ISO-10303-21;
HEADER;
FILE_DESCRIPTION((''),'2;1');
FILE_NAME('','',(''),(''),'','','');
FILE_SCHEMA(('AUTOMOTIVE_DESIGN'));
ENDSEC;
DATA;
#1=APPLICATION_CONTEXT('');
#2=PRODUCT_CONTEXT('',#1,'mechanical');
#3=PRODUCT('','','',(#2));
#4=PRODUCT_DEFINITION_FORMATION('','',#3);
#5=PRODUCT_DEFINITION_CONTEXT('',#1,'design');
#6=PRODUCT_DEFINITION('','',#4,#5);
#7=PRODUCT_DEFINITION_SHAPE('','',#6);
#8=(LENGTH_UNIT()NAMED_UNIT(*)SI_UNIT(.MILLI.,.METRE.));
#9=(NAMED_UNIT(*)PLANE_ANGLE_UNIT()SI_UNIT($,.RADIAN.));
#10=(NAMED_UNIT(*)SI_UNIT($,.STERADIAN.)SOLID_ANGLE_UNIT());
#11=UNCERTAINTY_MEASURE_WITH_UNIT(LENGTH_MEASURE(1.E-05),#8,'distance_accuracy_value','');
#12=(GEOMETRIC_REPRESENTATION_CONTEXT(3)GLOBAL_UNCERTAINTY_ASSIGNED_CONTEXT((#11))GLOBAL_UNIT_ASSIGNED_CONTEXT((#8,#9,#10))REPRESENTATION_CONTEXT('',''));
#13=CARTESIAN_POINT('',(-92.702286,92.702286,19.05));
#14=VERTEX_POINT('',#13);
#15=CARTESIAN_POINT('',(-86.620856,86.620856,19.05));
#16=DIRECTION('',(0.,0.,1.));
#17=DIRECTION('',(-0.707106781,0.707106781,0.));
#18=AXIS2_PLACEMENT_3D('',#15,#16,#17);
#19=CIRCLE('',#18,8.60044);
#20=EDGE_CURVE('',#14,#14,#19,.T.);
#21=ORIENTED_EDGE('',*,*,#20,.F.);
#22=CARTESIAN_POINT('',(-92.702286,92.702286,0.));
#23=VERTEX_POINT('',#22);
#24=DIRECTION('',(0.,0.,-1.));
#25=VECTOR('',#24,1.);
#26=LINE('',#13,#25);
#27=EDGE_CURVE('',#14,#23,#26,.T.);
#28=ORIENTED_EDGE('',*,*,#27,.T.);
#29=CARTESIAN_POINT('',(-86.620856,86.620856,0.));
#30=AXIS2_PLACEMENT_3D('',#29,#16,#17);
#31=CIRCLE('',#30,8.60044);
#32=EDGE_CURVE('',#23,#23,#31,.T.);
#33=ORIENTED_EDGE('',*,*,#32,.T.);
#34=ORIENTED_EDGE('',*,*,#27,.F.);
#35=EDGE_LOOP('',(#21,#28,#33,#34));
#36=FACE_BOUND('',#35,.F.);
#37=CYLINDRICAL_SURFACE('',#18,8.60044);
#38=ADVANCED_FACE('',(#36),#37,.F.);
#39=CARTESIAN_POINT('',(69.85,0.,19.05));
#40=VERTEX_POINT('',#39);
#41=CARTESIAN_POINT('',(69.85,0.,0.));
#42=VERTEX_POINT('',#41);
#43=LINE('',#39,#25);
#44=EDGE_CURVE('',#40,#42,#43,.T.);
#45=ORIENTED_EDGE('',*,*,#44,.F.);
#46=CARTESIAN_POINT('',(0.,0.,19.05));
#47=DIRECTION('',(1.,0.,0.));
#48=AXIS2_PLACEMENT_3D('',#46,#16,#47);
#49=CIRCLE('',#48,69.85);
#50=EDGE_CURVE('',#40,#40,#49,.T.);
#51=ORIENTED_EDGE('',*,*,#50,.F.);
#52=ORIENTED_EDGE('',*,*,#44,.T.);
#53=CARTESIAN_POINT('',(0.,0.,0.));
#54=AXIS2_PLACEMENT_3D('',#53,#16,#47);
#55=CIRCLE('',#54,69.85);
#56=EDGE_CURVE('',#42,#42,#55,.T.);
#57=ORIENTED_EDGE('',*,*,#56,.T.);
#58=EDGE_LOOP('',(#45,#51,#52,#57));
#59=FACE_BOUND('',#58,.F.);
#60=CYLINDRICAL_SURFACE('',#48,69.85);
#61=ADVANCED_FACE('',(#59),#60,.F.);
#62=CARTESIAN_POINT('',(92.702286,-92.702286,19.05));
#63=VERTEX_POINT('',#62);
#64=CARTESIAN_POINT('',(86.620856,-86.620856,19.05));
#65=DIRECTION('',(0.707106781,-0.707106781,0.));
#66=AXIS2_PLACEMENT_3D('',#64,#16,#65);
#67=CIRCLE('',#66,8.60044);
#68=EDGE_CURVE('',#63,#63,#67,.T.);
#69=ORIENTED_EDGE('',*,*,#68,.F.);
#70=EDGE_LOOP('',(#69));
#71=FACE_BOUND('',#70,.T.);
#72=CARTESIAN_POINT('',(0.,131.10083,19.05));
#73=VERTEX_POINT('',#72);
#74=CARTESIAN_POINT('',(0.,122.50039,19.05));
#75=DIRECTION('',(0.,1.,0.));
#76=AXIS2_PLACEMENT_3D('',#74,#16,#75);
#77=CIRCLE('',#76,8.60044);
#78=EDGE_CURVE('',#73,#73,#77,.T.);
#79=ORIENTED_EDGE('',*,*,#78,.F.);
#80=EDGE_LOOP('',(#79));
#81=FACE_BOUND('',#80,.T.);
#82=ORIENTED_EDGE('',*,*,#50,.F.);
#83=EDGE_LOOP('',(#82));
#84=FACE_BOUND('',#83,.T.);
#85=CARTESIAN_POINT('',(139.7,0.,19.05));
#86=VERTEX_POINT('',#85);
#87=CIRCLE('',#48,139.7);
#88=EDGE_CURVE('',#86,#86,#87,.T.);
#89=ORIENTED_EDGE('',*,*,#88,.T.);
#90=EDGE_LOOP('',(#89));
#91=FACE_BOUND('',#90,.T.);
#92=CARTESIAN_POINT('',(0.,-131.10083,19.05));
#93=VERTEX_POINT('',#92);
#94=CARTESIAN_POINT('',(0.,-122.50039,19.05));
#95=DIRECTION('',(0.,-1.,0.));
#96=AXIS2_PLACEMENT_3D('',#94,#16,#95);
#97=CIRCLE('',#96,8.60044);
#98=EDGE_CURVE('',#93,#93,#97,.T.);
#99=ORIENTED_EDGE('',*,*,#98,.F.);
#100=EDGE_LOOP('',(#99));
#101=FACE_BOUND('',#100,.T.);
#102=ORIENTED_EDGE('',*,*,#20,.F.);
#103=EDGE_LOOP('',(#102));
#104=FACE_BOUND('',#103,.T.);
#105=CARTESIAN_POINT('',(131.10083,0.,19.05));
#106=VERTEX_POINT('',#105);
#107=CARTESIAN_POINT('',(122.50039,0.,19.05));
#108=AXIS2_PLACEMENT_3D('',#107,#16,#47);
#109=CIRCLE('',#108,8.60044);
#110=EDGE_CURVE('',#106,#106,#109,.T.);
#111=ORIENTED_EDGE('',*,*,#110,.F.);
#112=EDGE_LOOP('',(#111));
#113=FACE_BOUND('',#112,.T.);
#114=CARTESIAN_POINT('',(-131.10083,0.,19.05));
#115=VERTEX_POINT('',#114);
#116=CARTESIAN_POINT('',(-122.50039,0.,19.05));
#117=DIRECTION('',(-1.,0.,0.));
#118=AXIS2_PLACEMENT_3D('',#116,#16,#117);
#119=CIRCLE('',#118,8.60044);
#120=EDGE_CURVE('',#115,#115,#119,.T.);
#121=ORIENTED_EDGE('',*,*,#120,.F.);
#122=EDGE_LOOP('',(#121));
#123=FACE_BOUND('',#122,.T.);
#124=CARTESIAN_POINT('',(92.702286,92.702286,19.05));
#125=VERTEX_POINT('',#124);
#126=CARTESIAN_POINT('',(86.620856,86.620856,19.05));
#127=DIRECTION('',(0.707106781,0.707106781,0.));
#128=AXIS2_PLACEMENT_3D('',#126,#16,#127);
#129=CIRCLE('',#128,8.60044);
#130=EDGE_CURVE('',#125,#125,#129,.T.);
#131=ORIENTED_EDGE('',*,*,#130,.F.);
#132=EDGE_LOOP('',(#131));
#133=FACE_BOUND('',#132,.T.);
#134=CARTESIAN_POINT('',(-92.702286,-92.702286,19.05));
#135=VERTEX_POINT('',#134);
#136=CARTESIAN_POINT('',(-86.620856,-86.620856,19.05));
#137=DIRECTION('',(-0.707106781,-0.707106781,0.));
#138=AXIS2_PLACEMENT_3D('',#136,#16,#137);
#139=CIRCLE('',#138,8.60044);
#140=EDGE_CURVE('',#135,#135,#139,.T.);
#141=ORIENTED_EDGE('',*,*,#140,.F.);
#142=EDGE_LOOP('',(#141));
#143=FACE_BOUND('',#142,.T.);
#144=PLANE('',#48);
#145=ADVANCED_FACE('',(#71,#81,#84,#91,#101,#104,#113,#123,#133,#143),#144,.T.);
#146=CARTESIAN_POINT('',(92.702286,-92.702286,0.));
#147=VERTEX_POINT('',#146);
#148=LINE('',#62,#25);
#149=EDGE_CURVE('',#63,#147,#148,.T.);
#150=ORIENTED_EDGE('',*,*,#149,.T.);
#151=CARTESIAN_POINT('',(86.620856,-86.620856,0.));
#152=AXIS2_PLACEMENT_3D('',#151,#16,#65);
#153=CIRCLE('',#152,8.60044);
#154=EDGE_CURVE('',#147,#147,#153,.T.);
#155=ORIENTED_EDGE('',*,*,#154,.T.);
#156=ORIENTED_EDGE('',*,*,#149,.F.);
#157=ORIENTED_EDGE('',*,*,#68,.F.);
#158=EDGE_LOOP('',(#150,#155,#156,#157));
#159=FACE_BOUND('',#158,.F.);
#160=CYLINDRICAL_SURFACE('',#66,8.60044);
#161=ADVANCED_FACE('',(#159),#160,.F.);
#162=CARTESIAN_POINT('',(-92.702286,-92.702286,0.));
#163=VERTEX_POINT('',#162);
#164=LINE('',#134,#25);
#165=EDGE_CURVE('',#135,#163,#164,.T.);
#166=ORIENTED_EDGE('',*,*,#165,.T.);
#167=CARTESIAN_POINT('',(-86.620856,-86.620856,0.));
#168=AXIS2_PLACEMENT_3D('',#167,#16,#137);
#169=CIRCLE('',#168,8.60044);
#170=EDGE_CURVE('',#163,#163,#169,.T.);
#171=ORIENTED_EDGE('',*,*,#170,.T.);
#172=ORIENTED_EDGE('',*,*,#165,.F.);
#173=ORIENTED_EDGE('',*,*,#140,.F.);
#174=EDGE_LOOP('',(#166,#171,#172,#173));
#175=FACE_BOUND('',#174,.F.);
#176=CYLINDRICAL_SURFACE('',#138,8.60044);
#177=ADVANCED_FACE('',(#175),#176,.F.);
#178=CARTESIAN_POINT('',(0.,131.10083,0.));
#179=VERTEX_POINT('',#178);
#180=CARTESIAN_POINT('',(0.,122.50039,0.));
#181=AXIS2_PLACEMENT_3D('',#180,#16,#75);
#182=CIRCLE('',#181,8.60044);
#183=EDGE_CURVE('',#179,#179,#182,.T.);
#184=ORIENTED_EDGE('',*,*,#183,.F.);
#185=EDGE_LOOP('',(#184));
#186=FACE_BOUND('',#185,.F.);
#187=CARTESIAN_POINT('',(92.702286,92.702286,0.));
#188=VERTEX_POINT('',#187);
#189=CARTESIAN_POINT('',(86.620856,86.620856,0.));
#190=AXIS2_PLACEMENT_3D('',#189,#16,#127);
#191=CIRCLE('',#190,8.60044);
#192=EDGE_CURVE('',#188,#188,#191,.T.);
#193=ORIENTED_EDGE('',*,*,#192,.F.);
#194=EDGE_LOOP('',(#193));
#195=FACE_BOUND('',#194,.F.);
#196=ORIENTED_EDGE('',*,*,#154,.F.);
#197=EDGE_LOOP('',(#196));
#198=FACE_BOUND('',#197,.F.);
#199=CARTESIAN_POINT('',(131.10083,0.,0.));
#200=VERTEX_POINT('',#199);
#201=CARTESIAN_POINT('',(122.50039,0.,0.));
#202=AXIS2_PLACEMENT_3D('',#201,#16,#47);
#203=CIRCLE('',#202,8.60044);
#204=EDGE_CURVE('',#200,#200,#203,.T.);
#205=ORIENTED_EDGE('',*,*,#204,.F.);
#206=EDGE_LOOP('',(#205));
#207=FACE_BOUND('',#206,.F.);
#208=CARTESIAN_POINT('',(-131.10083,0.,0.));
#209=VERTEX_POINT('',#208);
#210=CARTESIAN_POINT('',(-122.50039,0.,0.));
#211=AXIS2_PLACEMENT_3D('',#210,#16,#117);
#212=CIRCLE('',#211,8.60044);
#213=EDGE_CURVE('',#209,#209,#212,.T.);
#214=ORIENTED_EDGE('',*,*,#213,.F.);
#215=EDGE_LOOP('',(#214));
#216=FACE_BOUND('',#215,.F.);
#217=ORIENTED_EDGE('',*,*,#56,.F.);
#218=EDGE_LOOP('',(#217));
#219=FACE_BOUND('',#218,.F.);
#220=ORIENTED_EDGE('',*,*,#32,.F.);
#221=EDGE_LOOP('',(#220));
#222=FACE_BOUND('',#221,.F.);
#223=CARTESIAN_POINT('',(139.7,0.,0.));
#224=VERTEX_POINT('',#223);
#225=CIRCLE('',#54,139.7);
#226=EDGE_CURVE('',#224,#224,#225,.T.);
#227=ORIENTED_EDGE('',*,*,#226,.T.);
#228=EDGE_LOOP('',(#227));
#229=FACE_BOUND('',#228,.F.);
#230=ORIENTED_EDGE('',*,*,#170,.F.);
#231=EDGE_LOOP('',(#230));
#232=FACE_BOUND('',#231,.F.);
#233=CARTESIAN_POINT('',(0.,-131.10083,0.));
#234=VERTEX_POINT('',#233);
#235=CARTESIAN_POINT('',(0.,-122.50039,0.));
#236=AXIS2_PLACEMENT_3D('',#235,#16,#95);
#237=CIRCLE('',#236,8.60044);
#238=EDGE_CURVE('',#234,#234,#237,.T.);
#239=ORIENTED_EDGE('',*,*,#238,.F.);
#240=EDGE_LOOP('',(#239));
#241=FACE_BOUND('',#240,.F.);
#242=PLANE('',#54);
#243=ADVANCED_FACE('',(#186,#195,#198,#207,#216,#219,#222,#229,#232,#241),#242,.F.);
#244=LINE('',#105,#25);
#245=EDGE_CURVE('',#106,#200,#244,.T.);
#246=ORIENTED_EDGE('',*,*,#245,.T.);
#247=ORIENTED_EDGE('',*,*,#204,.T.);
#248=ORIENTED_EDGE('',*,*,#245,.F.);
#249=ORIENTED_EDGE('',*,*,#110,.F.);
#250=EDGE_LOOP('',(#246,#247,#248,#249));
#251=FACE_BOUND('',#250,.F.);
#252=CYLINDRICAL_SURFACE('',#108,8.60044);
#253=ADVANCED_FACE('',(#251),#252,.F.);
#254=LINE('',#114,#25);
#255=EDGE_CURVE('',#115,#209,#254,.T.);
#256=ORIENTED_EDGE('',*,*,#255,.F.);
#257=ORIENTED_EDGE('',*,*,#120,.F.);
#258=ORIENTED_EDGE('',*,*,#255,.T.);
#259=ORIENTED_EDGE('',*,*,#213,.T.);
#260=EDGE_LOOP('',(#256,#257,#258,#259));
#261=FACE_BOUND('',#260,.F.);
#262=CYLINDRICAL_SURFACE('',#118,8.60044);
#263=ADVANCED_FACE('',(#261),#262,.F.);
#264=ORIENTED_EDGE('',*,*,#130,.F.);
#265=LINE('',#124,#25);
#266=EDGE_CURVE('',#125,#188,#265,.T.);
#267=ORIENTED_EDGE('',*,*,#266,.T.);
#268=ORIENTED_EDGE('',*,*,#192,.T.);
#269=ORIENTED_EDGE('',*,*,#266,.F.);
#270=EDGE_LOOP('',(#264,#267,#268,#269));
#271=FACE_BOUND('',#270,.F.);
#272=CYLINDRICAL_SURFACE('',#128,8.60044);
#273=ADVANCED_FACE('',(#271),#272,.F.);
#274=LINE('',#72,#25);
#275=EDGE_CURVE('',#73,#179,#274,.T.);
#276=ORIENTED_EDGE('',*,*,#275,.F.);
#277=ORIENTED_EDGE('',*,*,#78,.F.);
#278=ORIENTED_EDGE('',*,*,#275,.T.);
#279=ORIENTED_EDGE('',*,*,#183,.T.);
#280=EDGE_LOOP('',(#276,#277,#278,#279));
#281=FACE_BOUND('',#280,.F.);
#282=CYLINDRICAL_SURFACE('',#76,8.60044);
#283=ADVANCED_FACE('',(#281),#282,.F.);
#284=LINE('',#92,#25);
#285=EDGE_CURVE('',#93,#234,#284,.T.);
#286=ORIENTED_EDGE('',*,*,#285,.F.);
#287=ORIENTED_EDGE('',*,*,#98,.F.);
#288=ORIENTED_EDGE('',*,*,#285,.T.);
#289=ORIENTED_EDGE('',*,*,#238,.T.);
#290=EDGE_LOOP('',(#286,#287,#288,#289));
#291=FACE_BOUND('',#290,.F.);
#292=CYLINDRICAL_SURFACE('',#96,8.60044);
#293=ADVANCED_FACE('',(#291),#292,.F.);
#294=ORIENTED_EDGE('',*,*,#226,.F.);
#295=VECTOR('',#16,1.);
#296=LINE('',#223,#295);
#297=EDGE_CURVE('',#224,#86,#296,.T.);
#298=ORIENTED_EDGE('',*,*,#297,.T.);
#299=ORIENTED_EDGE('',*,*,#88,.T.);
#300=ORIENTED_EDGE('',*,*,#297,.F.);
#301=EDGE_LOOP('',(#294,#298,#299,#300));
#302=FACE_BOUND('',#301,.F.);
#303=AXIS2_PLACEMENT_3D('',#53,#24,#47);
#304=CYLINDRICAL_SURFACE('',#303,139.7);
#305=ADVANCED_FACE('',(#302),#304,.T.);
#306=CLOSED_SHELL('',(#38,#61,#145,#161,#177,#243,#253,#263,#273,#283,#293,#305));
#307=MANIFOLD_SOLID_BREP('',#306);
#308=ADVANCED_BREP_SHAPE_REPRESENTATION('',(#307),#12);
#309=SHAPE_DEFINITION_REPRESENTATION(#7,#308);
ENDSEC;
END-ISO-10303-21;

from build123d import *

# Parameters (mm, degrees)
F0_R            = 139.7
F1_DEPTH        = 19.05
F2_R            = 69.85
F3_DEPTH        = 19.051
F4_R            = 8.60044
F5_DEPTH        = 19.051
F5_COPIES_COUNT = 8


# Not quite as in the source:
# - a pattern or mirror of a feature is missing from the dataset's text; its kind, count and spacing are read off the source's solid


with BuildPart() as f1:
    # F0 (on Top) → F1 (new body)
    with BuildSketch(Plane.XY):
        Circle(F0_R)
    extrude(amount=F1_DEPTH)

    # F2 (on face) → F3 (cut, through all)
    with BuildSketch(Plane.XY.offset(19.05)):
        Circle(F2_R)
    extrude(amount=-F3_DEPTH, mode=Mode.SUBTRACT)

    # F4 (on face) → F5 (cut, through all)
    with BuildSketch(Plane.XY.offset(19.05)):
        with Locations((122.50039, 0)):
            Circle(F4_R)
    f5 = extrude(amount=-F5_DEPTH, mode=Mode.SUBTRACT)

    # F5_copies: F5 ×8 about axis
    f5_copies_axis = Axis((0, 0, 0), (0, 0, 1))
    for i in range(1, F5_COPIES_COUNT):
        add(f5.rotate(f5_copies_axis, i * 360 / F5_COPIES_COUNT), mode=Mode.SUBTRACT)


solid = f1.part
